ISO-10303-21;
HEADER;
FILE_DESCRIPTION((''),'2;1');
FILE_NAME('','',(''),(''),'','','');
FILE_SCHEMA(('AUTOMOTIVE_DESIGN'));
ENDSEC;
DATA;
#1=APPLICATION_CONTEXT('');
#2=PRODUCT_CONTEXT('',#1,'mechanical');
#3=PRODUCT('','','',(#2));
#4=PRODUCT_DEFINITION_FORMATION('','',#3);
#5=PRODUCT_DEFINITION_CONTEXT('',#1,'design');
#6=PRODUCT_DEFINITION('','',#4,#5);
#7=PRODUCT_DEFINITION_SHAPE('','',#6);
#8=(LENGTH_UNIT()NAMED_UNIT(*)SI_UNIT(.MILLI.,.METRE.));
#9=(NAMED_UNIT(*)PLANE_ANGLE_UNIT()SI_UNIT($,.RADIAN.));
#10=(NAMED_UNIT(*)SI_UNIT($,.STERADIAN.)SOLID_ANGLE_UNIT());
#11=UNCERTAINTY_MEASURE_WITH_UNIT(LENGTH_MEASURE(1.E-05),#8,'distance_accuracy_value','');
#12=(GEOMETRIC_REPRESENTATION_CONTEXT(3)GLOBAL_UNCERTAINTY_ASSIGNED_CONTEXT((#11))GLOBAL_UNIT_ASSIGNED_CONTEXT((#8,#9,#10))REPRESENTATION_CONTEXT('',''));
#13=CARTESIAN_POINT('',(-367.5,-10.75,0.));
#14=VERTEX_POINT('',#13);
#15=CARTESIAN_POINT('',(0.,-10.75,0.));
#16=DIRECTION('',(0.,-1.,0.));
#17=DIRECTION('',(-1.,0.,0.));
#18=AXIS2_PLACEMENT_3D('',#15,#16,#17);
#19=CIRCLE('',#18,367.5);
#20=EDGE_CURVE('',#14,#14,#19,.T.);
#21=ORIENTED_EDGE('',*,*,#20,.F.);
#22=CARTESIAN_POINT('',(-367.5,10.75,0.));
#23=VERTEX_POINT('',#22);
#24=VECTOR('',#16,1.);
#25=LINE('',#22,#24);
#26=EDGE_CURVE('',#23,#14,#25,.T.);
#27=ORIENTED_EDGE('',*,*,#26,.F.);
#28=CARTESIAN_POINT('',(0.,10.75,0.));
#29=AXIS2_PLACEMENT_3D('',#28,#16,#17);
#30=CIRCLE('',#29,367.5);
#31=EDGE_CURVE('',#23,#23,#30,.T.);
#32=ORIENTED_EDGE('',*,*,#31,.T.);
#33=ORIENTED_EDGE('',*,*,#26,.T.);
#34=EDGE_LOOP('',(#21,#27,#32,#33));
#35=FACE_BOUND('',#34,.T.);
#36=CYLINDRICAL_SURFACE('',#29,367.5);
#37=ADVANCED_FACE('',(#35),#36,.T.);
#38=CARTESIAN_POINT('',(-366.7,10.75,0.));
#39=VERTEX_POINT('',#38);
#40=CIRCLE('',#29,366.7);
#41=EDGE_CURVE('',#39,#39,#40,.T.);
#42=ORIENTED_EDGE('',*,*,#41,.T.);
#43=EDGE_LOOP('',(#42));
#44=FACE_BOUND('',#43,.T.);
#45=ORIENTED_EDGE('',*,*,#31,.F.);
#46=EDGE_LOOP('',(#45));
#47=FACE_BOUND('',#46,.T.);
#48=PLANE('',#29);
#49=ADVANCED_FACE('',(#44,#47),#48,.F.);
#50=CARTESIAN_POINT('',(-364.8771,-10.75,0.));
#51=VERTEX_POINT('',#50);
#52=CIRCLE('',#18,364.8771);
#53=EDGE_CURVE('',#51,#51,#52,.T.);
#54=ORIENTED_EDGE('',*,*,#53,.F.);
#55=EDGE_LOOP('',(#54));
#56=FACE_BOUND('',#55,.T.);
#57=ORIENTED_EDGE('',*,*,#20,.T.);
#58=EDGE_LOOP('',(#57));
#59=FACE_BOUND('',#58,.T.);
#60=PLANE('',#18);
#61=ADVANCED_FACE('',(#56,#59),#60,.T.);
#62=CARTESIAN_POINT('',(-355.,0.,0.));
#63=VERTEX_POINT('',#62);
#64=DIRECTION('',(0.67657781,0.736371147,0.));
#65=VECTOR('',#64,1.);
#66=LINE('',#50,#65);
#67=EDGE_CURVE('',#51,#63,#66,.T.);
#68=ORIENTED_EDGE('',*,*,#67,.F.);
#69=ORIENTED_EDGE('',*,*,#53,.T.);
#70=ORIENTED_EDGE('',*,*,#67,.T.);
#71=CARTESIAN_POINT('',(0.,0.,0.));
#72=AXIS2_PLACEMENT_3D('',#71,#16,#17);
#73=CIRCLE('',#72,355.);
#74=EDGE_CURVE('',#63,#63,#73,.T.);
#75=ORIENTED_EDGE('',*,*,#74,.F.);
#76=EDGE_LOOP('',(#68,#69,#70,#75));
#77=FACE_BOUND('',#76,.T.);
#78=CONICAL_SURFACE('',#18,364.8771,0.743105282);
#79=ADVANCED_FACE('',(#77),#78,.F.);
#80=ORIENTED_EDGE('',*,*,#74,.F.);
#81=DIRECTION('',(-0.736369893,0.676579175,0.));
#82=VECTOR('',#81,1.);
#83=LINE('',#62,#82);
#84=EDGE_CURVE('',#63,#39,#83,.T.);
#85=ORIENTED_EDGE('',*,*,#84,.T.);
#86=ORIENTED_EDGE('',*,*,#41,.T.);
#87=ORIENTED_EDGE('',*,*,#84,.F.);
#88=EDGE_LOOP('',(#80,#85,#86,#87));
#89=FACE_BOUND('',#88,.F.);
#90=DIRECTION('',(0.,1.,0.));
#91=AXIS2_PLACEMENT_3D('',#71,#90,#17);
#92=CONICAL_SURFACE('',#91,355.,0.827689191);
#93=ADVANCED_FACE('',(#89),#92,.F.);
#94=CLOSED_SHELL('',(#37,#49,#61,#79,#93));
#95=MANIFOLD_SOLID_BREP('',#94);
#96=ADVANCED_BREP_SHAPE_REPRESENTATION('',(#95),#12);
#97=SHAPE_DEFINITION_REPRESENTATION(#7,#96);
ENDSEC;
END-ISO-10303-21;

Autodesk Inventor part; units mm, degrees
ref_plane "YZ Plane" through (0, 0, 0) normal (1, 0, 0) x (0, 1, 0)
ref_plane "XZ Plane" through (0, 0, 0) normal (0, 1, 0) x (-1, 0, 0)
ref_plane "XY Plane" through (0, 0, 0) normal (0, 0, 1) x (1, 0, 0)
sketch "Sketch1" plane through (0, 0, 0) normal (0, 0, 1) x (1, 0, 0)
  line L0 (0, 2.5713) -> (0, -2.5713)
  line L1 (-367.5, 10.75) -> (-367.5, -10.75)
  line L2 (-367.5, -10.75) -> (-364.8771, -10.75)
  line L3 (-364.8771, -10.75) -> (-355, 0)
  line L4 (-355, 0) -> (-366.7, 10.75)
  line L5 (-366.7, 10.75) -> (-367.5, 10.75)
  point P0 (0, 0)
  point P1 (0, 0)
  point P2 (-367.5, 0)
  dimension "dimensionA_parameter" = 0.8
  dimension "dimensionD_parameter" = 21.5
  dimension "d0" = 90
  dimension "fasciaCollaudo2_parameter" = 12.5
  dimension "externalDiameter2_parameter" = 735
  dimension "d1" = 710
revolve "Revolution4" add sketch "Sketch1" angle 360 about axis through (0, 2.5713, 0) along (0, -1, 0)
properties part number "self-aligning-ring-2" material "Nylon 6/6"
